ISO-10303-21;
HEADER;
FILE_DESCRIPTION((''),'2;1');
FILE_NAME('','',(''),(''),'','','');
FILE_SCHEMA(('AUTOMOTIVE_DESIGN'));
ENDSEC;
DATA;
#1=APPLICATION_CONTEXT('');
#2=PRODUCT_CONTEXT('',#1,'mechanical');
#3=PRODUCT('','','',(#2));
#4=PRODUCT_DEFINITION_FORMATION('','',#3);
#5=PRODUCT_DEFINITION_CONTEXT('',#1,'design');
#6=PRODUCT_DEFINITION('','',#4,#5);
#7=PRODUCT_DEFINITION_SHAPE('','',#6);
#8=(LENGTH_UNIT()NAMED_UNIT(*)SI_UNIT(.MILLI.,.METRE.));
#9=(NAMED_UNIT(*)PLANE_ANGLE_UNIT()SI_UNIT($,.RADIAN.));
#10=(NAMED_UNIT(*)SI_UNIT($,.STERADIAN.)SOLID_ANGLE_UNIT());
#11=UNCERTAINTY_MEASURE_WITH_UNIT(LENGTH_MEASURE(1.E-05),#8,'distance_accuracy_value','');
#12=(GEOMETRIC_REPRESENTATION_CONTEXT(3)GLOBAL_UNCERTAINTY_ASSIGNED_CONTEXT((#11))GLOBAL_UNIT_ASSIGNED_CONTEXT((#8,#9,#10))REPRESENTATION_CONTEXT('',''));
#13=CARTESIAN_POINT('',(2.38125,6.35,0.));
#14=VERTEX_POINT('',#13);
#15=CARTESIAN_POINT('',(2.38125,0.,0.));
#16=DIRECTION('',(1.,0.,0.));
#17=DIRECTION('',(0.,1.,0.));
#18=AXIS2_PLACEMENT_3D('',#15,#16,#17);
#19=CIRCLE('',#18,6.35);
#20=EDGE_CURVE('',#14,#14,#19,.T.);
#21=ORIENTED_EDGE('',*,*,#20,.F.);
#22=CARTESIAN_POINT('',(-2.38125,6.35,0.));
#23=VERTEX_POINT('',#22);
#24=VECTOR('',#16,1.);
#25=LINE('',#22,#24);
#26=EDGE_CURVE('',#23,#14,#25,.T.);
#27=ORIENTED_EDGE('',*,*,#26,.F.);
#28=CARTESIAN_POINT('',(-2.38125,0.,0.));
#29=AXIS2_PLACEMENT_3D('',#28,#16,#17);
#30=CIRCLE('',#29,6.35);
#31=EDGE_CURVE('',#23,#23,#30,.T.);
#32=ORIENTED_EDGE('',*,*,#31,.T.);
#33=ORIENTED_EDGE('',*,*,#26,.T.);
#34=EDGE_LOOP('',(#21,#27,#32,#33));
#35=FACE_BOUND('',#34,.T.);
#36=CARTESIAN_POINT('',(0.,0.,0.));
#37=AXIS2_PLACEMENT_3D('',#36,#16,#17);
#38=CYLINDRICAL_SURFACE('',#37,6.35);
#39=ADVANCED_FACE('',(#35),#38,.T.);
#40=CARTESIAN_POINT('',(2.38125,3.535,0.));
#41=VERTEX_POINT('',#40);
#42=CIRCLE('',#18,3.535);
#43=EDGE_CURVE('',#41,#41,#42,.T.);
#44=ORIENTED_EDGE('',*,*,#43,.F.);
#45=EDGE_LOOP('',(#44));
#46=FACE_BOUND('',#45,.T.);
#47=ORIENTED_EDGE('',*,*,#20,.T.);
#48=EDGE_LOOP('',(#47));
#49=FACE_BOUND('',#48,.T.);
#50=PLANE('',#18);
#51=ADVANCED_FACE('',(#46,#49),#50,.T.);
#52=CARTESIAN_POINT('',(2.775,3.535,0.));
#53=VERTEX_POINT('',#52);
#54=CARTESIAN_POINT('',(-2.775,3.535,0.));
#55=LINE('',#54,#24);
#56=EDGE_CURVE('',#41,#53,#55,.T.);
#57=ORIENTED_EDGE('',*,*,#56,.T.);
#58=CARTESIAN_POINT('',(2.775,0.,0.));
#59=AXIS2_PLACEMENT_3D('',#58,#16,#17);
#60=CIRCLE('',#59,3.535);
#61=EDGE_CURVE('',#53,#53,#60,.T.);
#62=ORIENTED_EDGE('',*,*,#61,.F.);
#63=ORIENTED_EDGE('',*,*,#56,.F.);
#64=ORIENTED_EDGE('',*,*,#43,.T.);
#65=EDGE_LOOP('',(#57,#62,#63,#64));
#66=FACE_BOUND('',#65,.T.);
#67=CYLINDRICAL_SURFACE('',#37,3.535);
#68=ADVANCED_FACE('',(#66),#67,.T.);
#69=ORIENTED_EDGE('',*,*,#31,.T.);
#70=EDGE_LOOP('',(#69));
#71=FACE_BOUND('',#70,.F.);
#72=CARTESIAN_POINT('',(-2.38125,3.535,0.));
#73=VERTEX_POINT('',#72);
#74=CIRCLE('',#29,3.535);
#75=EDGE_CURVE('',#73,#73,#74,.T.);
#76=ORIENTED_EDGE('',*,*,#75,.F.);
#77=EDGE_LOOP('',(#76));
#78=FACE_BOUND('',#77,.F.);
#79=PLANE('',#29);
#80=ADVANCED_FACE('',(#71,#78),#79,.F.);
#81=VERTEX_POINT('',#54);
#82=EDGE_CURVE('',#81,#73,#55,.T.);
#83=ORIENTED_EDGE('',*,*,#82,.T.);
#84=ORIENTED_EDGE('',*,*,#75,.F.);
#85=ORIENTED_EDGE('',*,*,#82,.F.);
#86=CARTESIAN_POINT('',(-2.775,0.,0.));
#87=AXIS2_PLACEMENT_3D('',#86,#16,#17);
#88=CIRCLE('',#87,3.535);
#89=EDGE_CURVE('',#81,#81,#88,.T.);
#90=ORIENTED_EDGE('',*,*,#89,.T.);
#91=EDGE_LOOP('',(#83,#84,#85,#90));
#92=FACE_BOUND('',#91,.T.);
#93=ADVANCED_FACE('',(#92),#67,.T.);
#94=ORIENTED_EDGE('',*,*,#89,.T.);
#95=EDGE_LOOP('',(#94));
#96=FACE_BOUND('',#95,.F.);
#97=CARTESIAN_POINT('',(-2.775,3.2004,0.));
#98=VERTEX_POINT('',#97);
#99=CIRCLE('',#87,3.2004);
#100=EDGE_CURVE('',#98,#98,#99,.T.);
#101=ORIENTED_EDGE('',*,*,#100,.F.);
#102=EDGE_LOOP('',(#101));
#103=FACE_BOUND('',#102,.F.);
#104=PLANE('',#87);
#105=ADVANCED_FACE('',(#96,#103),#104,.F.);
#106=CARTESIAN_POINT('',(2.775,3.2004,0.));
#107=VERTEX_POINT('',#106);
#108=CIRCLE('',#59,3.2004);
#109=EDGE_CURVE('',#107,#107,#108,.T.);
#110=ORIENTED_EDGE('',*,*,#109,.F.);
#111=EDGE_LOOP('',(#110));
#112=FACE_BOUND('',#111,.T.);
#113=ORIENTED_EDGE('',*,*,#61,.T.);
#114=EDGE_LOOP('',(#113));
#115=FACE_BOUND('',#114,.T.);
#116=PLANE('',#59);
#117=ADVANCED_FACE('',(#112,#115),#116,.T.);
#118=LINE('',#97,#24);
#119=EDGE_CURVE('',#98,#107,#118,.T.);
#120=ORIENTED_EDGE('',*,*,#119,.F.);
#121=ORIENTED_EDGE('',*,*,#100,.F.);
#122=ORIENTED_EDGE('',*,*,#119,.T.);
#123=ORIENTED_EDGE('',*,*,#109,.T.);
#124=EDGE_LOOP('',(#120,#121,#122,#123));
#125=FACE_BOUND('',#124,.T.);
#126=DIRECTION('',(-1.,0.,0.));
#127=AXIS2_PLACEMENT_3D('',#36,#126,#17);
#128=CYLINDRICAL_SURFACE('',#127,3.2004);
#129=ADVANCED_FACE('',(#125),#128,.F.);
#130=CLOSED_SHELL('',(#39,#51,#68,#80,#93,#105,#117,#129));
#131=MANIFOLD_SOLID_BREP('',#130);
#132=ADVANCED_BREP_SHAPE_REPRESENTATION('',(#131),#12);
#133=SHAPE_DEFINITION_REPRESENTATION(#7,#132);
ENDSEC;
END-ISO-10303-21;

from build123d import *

# Parameters (mm, degrees)
F0_R     = 6.35
F0_R_2   = 3.2004
F1_DEPTH = 2.38125
F2_R     = 3.535
F2_R_2   = 3.2004
F3_DEPTH = 2.775


# Not quite as in the source:
# - a length typed as a fraction of an inch, garbled in the dataset ("3 / 203.2 mm" for 3/8 in), is restored


with BuildPart() as f1:
    # F0 (on Right) → F1 (new body, symmetric)
    with BuildSketch(Plane.YZ):
        Circle(F0_R)
        Circle(F0_R_2, mode=Mode.SUBTRACT)
    extrude(amount=F1_DEPTH, both=True)

    # F2 (on Right) → F3 (join, symmetric)
    with BuildSketch(Plane.YZ):
        Circle(F2_R)
        Circle(F2_R_2, mode=Mode.SUBTRACT)
    extrude(amount=F3_DEPTH, both=True)


solid = f1.part
